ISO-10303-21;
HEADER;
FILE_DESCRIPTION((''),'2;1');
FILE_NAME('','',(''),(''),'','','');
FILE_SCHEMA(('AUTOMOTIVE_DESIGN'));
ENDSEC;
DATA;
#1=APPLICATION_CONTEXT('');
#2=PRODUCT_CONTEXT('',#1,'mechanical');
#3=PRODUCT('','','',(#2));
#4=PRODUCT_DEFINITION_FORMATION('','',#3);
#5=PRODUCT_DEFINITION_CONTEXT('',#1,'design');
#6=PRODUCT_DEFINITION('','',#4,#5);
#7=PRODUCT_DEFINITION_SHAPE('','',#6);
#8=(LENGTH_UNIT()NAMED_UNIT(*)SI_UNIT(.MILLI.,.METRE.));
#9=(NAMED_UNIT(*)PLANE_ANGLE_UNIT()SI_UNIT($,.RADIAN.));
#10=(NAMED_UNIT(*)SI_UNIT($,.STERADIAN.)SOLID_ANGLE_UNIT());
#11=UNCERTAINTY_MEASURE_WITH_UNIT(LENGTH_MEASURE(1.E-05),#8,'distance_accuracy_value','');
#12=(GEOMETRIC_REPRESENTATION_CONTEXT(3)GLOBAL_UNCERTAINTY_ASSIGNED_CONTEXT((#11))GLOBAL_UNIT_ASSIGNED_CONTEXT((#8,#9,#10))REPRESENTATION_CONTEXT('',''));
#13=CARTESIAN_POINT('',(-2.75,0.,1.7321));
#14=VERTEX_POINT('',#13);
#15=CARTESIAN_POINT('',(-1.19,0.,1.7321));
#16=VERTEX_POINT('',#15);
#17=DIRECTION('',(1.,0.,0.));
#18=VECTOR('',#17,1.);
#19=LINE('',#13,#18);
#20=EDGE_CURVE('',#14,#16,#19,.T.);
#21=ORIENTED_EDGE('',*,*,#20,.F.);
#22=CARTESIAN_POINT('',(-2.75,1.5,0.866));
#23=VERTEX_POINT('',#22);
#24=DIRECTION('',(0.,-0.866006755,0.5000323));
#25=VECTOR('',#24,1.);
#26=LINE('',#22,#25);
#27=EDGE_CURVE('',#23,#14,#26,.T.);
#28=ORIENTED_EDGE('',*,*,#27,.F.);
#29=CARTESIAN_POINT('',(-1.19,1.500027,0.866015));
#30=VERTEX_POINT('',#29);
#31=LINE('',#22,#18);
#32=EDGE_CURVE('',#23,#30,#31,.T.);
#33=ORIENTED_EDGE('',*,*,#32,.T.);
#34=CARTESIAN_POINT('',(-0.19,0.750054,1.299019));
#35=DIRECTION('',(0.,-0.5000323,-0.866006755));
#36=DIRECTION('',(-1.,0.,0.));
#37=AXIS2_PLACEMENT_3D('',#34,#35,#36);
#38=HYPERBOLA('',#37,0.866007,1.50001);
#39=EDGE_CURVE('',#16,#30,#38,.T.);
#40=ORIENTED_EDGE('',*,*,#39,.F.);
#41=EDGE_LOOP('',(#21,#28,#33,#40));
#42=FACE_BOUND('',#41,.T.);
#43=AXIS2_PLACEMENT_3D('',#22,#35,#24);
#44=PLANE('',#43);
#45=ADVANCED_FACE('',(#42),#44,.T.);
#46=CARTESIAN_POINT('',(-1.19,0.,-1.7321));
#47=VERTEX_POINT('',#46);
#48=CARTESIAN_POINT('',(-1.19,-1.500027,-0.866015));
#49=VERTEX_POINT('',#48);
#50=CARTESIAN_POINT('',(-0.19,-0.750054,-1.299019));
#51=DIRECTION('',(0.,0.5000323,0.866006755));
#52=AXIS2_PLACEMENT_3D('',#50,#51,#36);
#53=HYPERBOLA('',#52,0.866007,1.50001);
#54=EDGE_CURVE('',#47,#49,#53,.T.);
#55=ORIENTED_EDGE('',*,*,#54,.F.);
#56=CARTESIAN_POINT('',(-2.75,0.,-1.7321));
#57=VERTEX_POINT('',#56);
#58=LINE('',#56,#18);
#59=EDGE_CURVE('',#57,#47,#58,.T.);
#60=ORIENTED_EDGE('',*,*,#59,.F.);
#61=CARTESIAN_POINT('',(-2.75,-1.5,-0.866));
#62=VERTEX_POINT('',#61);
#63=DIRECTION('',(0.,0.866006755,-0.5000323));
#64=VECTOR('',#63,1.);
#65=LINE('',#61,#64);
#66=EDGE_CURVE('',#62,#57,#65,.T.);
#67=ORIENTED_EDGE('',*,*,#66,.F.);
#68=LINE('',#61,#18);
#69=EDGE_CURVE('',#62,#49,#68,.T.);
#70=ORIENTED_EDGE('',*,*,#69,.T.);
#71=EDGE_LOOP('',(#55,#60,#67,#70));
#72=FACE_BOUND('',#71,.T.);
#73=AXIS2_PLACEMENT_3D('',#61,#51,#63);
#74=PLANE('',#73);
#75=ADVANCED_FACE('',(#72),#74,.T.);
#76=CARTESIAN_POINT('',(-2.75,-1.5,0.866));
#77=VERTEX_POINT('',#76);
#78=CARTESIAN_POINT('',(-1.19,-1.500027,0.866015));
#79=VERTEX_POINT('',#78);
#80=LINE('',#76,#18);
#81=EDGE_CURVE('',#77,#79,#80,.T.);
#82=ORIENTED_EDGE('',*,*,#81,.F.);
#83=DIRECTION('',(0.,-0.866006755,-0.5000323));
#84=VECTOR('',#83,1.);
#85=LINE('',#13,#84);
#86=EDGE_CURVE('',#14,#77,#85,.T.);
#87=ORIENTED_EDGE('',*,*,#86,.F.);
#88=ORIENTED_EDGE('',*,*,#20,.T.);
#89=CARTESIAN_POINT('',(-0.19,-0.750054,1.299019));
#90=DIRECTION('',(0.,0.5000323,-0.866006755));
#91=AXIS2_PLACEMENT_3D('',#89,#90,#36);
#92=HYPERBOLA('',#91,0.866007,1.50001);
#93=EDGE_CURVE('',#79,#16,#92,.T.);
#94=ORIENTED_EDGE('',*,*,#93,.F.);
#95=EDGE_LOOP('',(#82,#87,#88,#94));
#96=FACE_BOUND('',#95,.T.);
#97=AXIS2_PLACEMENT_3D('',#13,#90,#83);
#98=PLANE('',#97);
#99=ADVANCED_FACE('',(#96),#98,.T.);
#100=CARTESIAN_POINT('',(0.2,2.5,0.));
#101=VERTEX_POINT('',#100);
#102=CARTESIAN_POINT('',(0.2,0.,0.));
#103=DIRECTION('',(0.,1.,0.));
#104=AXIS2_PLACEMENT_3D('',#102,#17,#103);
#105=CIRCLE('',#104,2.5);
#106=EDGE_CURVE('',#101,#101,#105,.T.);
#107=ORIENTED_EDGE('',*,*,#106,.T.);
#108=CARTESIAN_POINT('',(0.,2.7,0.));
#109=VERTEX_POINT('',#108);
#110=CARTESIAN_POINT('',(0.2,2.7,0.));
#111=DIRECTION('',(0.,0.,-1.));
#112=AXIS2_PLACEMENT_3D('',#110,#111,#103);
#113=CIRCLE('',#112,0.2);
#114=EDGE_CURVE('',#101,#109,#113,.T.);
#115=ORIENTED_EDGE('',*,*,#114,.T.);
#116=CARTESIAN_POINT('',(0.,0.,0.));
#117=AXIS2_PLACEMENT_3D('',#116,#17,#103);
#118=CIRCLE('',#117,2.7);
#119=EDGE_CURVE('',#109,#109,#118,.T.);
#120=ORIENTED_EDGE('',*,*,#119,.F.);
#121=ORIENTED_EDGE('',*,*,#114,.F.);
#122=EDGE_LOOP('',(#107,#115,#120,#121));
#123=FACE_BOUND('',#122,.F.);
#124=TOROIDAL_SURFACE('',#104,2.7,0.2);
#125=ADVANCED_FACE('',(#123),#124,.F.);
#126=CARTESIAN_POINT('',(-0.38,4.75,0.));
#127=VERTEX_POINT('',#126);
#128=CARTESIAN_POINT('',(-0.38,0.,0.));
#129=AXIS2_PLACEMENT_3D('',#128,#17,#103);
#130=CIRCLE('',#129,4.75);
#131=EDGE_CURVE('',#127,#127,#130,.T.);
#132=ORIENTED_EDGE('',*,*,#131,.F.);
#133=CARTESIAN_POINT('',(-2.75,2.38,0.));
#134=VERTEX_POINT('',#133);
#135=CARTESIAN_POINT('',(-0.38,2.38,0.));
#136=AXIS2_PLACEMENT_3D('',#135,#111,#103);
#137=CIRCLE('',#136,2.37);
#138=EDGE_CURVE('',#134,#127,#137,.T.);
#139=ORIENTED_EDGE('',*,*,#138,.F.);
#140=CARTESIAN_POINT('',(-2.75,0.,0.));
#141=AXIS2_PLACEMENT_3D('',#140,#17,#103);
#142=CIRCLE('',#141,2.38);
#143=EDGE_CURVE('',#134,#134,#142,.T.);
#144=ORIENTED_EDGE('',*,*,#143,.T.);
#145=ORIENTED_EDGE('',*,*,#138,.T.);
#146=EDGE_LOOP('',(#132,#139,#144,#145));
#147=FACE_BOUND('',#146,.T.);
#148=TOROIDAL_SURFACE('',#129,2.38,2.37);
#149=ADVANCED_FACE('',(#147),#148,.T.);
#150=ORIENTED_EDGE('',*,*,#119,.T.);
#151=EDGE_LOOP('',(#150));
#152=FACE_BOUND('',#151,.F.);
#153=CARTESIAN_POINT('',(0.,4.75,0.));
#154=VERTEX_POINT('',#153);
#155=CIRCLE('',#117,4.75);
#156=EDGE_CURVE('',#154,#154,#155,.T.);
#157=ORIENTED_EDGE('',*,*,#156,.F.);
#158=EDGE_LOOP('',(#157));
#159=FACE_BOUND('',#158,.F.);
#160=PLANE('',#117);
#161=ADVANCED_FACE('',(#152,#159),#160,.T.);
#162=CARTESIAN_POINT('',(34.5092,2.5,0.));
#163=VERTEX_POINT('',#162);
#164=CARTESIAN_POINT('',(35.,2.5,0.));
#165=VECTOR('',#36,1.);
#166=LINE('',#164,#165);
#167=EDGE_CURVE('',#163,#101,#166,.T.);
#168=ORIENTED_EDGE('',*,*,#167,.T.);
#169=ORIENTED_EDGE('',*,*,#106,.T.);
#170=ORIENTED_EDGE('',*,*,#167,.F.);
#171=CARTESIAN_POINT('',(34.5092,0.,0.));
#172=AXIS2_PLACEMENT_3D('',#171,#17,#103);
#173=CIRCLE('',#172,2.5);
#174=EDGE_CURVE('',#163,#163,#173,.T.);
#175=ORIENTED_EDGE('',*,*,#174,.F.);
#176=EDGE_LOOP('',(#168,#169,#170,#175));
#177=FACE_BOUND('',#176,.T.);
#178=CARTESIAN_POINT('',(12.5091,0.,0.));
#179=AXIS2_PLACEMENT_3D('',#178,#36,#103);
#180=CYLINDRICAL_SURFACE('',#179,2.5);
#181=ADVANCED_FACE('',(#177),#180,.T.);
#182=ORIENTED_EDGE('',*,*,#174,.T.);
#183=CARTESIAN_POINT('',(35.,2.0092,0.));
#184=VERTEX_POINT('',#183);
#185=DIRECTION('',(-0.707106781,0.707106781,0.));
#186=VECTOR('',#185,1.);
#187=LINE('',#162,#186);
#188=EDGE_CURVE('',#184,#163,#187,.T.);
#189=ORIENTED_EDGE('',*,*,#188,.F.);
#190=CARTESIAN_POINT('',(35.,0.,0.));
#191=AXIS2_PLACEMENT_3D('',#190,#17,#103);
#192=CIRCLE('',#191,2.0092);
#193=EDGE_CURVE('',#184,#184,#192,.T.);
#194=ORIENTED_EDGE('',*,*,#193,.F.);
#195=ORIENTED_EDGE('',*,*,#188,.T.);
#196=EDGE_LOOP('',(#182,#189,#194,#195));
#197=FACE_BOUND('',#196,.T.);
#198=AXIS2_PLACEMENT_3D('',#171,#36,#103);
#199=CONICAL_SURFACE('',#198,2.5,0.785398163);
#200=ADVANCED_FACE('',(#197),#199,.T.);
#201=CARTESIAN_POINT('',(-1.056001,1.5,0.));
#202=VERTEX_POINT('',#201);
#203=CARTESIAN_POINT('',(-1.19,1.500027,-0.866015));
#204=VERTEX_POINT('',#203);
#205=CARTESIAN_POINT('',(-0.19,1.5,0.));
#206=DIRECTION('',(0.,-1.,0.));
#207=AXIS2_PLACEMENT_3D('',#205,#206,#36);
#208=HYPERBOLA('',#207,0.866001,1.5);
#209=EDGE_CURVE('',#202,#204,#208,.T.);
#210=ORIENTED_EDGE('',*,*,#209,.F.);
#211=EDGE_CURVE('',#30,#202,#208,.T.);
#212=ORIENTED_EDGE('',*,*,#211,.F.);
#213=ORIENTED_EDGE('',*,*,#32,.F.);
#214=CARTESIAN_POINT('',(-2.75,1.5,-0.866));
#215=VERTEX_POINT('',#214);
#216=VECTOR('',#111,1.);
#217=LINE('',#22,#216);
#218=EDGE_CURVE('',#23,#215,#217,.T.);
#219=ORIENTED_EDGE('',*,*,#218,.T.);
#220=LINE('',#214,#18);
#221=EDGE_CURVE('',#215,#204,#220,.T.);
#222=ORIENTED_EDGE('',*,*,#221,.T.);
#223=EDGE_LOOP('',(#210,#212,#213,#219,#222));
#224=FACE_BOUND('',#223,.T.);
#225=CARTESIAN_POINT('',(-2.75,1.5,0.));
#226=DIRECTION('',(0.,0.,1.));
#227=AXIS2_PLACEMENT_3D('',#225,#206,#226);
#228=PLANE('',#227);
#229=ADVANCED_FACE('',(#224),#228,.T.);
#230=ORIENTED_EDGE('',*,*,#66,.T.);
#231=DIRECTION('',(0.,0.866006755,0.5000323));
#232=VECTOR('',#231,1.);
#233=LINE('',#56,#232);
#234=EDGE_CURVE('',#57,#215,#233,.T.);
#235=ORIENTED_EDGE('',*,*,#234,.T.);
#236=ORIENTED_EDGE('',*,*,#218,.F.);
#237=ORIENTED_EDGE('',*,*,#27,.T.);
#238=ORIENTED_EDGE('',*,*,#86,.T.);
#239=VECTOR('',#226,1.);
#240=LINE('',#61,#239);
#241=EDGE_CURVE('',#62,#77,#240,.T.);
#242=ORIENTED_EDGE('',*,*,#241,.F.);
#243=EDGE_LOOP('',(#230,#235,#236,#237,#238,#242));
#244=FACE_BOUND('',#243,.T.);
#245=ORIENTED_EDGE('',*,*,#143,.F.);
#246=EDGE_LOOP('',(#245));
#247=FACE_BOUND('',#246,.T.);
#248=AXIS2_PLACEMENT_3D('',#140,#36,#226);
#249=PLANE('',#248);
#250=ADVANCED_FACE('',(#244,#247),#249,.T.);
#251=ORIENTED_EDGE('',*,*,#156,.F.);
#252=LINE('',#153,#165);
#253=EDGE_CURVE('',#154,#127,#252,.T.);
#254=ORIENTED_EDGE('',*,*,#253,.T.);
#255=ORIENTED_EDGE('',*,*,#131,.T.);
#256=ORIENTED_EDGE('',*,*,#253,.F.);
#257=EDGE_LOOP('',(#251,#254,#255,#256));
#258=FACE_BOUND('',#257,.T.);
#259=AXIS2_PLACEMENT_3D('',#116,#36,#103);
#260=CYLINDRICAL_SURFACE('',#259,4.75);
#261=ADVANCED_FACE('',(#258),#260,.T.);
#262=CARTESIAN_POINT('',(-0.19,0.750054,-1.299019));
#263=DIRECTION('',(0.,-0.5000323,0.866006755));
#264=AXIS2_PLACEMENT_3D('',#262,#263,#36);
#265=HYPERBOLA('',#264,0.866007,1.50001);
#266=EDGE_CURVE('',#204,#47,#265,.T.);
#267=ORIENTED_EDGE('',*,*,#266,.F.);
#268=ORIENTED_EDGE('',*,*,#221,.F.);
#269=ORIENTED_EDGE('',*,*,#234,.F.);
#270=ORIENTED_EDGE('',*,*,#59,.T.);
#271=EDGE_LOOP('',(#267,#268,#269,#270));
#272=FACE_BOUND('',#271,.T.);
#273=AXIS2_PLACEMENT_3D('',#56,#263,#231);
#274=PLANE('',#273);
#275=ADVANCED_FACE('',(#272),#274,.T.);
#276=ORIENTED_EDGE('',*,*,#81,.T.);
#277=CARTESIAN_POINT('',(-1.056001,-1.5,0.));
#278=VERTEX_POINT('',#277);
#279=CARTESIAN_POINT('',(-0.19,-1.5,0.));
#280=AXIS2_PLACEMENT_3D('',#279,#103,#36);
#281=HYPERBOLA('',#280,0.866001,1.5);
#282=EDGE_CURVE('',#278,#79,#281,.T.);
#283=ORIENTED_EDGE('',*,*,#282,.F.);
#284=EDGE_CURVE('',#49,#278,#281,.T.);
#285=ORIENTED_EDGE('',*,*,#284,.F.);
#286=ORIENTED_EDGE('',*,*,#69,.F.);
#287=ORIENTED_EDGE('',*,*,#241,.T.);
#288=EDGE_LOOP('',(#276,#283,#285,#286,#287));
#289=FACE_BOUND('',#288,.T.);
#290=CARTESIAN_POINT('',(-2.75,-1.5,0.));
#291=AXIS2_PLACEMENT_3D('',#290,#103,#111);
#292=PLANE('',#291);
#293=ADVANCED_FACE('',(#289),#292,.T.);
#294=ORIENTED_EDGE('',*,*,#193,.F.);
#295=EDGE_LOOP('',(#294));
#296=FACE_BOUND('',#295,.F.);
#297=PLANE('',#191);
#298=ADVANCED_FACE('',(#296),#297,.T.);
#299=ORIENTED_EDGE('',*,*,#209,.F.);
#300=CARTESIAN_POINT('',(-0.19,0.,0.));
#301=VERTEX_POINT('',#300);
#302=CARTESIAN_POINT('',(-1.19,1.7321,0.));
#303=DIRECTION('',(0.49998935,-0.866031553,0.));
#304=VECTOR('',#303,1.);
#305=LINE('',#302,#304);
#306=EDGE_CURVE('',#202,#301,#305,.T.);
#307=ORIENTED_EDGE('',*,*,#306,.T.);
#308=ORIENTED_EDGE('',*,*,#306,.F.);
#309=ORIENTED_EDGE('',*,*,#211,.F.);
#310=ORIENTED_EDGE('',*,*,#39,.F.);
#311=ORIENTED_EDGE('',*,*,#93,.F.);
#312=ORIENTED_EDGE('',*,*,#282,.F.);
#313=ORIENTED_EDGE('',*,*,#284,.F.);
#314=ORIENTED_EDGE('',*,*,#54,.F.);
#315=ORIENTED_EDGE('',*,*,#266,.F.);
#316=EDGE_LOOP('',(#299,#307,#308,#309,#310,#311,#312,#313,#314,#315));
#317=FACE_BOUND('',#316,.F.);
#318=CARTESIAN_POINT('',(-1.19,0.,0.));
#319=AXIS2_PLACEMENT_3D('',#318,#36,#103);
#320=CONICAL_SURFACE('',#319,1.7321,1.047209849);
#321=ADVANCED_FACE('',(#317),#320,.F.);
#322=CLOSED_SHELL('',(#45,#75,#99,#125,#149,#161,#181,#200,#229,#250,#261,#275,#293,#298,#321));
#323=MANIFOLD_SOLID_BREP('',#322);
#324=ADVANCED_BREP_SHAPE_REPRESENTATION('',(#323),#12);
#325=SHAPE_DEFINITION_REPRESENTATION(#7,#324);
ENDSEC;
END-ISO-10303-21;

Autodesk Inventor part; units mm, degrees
ref_plane "YZ Plane" through (0, 0, 0) normal (1, 0, 0) x (0, 1, 0)
ref_plane "XZ Plane" through (0, 0, 0) normal (0, 1, 0) x (-1, 0, 0)
sketch "Sketch1" plane through (0, 0, 0) normal (0, 0, 1) x (1, 0, 0)
  line L0 (-0.19, 0) -> (35, 0)
  line L1 (35, 0) -> (35, 2.5)
  line L2 (35, 2.5) -> (13, 2.5)
  line L3 (13, 2.5) -> (12.5091, 2.5)
  line L4 (12.5091, 2.5) -> (0, 2.5)
  line L5 (0, 2.5) -> (0, 4.75)
  line L6 (0, 4.75) -> (-2.75, 4.75)
  line L7 (-2.75, 4.75) -> (-2.75, 1.7321)
  line L8 (-2.75, 1.7321) -> (-1.19, 1.7321)
  line L9 (-1.19, 1.7321) -> (-0.19, 0)
  line L10 (-10.3, 0) -> (42.55, 0) projected
  line L11 (0, -0.95) -> (0, 5.7) projected
  line L12 (13, 2.5) -> (0, 2.5) construction
  dimension "d1" = 22
  dimension "d2" = 0.4909
  dimension "d3" = 2.75
  dimension "d4" = 1.56
  dimension "d5" = 60
  dimension "d6" = 5
  dimension "d7" = 5
  dimension "d8" = 3.4641
  dimension "d9" = 9.5
  dimension "d26" = 35
revolve "Body" add sketch "Sketch1" angle 360 about axis through (-0.19, 0, 0) along (1, 0, 0)
sketch "Sketch2" plane through (-2.75, 0, 0) normal (-1, 0, 0) x (0, 0, 1)
  circle A0 centre (0, 0) radius 1.7321 projected
  line L0 (0, -6.65) -> (0, 6.65) projected
  line L1 (-6.65, 0) -> (6.65, 0) projected
  line L2 (1.7321, 0) -> (0.866, -1.5)
  line L3 (0.866, -1.5) -> (-0.866, -1.5)
  line L4 (-0.866, -1.5) -> (-1.7321, 0)
  line L5 (-1.7321, 0) -> (-0.866, 1.5)
  line L6 (-0.866, 1.5) -> (0.866, 1.5)
  line L7 (0.866, 1.5) -> (1.7321, 0)
extrude "Slot" add sketch "Sketch2" against normal up to next contours L7 A0 | A0 L2 | L6 L0 A0 | A0 L0 L3 | L0 L6 A0 | A0 L3 L0 | L4 A0 | A0 L5
fillet "Fillet1" radius 2.37 1 edges at (-2.75, -4.75, 0)
thread "Thread" size "M5x0.8" class "6g" standard "ISO Metric profile" length 22
chamfer "Chamfer1" distance 0.4908 distance2 0.4908 1 edges at (35, -2.5, 0) measured on face at (35, -0.7192, 0.1653)
ref_plane "Work Plane1" through (29, 0, 0) normal (0, -1, 0) x (1, 0, 0)
fillet "Fillet2" radius 0.2 1 edges at (0, -2.5, 0)
equation "\"d30\" = R"
equation "\"d17\" = RR"
equation "\"d13\" = GEL"
equation "\"d15\" = -0.5 * SPD + 0.5 * GD"
equation "\"d16\" = GUL"
equation "\"d1\" = GEL"
equation "\"d3\" = KOH"
equation "\"d4\" = INTI"
equation "\"d6\" = GD"
equation "\"d7\" = BDM"
equation "\"d8\" = 1.1547 * SW"
equation "\"d9\" = KOD"
equation "\"d26\" = NLG"
equation "\"GD\" = NND"
equation "\"NLG\" = 35"
equation "\"GEL\" = 22"
equation "\"KOD\" = 9.5"
equation "\"KOH\" = 2.75"
equation "\"INTI\" = 1.56"
equation "\"GAL\" = 0.61345 * PTC"
equation "\"GUL\" = 0.61345 * PTC"
equation "\"BDM\" = NND"
equation "\"SW\" = 3"
equation "\"RR\" = 2.37"
equation "\"SPD\" = NND - 1.2269 * PTC"
equation "\"R\" = 0.2"
equation "\"TOA\" = 30deg"
equation "\"GD1\" = THREADDIA - 1.2269 * PTC"
equation "\"THREADDIA\" = 5"
equation "\"PTC\" = 0.8"
equation "\"NND\" = 5"
equation "\"KOH1\" = 0.38"
equation "\"E0\" = 3.443"
properties part number "ISO 7380-1 - M5 x 35" material "Steel"
